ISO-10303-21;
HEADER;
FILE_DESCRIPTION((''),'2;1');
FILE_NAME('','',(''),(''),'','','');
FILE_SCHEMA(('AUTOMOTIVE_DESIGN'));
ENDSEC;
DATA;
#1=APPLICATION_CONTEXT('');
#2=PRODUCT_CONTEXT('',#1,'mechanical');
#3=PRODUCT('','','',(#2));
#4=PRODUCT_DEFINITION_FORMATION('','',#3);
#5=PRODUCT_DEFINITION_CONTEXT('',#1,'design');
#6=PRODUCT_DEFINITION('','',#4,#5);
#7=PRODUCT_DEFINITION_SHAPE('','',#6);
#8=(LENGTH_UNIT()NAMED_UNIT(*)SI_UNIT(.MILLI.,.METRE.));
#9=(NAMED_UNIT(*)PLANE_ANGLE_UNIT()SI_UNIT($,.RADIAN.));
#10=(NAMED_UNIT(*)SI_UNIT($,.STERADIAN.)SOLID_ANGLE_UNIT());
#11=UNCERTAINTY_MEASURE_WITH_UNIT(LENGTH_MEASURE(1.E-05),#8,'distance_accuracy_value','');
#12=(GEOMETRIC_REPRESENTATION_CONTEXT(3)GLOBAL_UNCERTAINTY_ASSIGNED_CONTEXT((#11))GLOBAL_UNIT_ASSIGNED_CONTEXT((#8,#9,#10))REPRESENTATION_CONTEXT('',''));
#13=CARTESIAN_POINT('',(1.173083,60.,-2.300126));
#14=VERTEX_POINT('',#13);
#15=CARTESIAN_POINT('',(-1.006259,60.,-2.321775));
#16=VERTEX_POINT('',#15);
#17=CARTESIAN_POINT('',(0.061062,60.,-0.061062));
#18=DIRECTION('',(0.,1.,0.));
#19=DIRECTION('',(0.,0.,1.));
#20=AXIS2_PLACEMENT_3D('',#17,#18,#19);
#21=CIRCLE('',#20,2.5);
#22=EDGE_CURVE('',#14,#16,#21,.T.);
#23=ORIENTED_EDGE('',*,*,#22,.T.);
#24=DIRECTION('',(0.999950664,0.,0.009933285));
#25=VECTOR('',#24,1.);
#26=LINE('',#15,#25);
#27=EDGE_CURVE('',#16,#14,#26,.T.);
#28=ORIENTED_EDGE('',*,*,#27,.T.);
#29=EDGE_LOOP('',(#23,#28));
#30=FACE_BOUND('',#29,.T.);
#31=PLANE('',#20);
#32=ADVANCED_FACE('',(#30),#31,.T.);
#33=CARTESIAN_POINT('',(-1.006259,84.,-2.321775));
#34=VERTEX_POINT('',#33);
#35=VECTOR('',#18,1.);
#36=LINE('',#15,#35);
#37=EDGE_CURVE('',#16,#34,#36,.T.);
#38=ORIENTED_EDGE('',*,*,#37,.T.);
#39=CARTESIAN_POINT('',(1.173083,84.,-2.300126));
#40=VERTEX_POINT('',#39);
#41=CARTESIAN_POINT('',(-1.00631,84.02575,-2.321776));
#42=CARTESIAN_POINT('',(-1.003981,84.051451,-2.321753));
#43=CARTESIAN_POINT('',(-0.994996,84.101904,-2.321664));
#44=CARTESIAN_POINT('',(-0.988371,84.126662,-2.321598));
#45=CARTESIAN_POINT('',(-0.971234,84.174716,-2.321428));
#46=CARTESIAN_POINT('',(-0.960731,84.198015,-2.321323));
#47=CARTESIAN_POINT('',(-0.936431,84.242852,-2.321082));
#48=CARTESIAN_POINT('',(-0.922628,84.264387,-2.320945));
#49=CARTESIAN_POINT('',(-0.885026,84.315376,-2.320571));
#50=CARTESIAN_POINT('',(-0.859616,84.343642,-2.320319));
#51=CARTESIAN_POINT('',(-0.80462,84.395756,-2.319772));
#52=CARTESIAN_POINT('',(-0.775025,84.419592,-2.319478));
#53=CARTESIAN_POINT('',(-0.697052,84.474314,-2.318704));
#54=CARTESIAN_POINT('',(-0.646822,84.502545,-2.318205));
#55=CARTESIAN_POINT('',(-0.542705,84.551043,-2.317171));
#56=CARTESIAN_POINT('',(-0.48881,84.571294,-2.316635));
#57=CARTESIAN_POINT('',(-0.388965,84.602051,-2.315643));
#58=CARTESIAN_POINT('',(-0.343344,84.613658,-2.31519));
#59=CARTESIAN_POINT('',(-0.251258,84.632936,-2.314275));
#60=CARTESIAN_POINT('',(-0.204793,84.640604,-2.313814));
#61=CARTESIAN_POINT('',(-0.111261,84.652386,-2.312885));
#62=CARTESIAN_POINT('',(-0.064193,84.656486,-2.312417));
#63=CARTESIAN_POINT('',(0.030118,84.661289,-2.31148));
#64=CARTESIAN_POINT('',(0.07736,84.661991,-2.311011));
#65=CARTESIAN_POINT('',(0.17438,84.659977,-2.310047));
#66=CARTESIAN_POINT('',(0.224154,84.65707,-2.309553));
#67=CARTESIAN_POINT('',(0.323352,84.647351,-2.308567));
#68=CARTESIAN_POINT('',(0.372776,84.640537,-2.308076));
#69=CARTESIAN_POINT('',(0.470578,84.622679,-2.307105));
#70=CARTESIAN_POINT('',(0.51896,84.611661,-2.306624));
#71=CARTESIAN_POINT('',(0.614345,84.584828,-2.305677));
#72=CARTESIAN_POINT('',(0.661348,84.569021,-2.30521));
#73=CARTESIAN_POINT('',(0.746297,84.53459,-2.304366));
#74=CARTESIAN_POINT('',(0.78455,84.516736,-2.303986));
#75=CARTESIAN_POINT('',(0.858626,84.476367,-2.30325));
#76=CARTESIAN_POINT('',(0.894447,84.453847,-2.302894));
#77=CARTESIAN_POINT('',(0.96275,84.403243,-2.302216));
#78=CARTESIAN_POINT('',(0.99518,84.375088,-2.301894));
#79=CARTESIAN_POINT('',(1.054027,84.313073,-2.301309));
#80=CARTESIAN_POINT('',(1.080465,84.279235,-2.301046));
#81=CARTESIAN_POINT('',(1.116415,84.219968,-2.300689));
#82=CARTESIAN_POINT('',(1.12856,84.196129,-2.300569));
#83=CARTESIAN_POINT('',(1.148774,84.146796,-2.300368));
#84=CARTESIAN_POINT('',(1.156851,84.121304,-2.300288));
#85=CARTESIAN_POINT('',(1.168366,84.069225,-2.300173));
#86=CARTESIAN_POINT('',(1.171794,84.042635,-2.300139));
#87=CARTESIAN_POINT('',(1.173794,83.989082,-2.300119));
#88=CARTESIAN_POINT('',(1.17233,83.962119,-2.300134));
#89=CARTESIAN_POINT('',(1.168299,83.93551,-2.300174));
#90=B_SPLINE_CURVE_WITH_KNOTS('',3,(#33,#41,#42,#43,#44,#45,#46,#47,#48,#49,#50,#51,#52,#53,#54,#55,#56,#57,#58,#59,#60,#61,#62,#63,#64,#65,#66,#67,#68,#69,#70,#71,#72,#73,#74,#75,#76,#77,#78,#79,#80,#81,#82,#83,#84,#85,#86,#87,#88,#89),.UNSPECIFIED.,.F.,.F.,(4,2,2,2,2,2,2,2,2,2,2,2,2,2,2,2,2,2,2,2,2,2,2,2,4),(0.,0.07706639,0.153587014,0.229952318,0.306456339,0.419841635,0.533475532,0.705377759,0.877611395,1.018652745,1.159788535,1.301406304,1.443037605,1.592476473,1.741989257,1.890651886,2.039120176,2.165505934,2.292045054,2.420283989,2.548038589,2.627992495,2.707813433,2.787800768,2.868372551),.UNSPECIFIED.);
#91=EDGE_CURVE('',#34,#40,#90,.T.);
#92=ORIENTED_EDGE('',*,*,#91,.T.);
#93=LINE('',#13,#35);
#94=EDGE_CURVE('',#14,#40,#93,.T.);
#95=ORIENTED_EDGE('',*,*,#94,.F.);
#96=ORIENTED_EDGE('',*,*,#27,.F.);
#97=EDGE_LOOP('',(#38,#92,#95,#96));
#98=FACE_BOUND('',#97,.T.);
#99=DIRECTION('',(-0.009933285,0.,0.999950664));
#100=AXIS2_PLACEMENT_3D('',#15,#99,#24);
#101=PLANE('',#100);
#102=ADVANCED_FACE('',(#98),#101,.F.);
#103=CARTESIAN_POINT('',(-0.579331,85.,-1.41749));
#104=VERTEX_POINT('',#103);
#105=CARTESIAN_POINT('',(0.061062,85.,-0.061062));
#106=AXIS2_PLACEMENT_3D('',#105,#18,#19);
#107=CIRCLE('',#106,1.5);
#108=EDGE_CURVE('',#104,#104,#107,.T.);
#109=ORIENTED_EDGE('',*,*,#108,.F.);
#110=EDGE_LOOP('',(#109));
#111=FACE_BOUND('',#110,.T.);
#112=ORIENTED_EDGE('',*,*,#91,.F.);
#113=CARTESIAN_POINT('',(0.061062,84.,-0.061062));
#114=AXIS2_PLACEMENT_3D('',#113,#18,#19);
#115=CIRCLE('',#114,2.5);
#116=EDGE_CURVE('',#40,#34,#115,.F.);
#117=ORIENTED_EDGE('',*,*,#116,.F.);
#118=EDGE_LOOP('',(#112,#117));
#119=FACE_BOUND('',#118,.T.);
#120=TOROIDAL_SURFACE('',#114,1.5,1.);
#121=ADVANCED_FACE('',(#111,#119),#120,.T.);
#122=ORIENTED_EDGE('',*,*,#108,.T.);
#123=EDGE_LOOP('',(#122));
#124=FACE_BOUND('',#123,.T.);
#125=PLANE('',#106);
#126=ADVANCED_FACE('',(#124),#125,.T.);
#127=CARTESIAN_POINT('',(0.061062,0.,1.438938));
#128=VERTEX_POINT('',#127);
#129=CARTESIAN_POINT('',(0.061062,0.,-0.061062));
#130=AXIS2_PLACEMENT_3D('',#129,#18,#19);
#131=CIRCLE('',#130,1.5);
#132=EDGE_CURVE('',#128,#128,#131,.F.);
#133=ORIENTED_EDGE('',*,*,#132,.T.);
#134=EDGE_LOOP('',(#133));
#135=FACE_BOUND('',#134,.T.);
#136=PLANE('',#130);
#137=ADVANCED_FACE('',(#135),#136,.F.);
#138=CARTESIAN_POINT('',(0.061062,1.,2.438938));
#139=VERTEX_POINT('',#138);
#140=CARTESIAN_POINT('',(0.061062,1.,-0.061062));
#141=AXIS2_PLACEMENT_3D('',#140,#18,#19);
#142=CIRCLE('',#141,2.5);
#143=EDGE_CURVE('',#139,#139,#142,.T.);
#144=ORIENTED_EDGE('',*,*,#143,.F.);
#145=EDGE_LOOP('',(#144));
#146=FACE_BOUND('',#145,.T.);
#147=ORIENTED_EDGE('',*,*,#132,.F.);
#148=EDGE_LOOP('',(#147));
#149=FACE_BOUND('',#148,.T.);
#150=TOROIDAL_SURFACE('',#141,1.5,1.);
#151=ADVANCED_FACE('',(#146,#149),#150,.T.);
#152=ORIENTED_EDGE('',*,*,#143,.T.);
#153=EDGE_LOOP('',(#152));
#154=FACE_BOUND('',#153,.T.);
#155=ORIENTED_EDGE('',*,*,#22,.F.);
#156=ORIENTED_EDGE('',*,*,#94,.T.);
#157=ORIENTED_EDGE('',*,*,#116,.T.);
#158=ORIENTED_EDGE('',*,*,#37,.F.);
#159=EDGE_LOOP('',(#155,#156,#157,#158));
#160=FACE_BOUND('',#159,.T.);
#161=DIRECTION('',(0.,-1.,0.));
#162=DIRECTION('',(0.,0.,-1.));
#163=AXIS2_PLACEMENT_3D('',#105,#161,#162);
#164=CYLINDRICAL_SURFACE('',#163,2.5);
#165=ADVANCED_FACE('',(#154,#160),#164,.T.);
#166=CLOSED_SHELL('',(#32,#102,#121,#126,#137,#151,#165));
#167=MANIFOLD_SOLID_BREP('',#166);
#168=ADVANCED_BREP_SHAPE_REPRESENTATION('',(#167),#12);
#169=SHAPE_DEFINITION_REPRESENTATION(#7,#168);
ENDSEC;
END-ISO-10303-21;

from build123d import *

# Parameters (mm, degrees)
SKETCH2_R           = 2.5
BOSS_EXTRUDE1_DEPTH = 85
CUT_EXTRUDE1_START  = -25
CUT_EXTRUDE1_DEPTH  = 25
FILLET1_R           = 1
FILLET2_R           = 1


with BuildPart() as part:
    # Sketch2 → Boss-Extrude1 (new body)
    with BuildSketch(Plane(origin=(0, 0, 0), x_dir=(1, 0, 0), z_dir=(0, 1, 0))):
        with Locations(Location((0.061061942, 0.061061942, 0), (0, 0, 270))):
            Circle(SKETCH2_R)
    extrude(amount=BOSS_EXTRUDE1_DEPTH)

    # Sketch3 → Cut-Extrude1 (cut)
    with BuildSketch(Plane(origin=(0, 85, 0), x_dir=(1, 0, 0), z_dir=(0, 1, 0)).offset(CUT_EXTRUDE1_START)):
        with BuildLine():
            Line((-1.00625914, 2.321775482), (1.173082806, 2.300126389))
            ThreePointArc((1.173082806, 2.300126389), (0.085895154, 2.560938601), (-1.00625914, 2.321775482))
        make_face()
    extrude(amount=CUT_EXTRUDE1_DEPTH, mode=Mode.SUBTRACT)

    # Fillet1
    # the kernel refuses this fillet: 1 mm, written as the material it takes off along each edge
    with BuildSketch(Plane(origin=(0.061061942, 85, -0.061061942), x_dir=(0.5312663336495629, 0, -0.8472048646759243), z_dir=(0.8472048646759243, 0, 0.5312663336495629))) as fillet1_piece_1:
        with BuildLine():
            CenterArc((2.5 - FILLET1_R, -FILLET1_R), FILLET1_R, 0, 90)
            Line((2.5 - FILLET1_R, 0), (2.5, 0))
            Line((2.5, 0), (2.5, -FILLET1_R))
        make_face()
    revolve(axis=Axis((0.061061942, 85, -0.061061942), (0, 1, 0)), revolution_arc=212.091055881, mode=Mode.SUBTRACT)
    with BuildSketch(Plane(origin=(0.061061942, 85, -0.061061942), x_dir=(0, 0, 1), z_dir=(-1, 0, 0))) as fillet1_piece_2:
        with BuildLine():
            CenterArc((2.5 - FILLET1_R, -FILLET1_R), FILLET1_R, 0, 90)
            Line((2.5 - FILLET1_R, 0), (2.5, 0))
            Line((2.5, 0), (2.5, -FILLET1_R))
        make_face()
    revolve(axis=Axis((0.061061942, 85, -0.061061942), (0, 1, 0)), revolution_arc=210.951767977, mode=Mode.SUBTRACT)

    # Fillet2
    fillet2_edges = [part.edges().sort_by_distance(p)[0] for p in [
        (0.061061942, 0, -2.561061942),
    ]]
    fillet(fillet2_edges, radius=FILLET2_R)


solid = part.part
